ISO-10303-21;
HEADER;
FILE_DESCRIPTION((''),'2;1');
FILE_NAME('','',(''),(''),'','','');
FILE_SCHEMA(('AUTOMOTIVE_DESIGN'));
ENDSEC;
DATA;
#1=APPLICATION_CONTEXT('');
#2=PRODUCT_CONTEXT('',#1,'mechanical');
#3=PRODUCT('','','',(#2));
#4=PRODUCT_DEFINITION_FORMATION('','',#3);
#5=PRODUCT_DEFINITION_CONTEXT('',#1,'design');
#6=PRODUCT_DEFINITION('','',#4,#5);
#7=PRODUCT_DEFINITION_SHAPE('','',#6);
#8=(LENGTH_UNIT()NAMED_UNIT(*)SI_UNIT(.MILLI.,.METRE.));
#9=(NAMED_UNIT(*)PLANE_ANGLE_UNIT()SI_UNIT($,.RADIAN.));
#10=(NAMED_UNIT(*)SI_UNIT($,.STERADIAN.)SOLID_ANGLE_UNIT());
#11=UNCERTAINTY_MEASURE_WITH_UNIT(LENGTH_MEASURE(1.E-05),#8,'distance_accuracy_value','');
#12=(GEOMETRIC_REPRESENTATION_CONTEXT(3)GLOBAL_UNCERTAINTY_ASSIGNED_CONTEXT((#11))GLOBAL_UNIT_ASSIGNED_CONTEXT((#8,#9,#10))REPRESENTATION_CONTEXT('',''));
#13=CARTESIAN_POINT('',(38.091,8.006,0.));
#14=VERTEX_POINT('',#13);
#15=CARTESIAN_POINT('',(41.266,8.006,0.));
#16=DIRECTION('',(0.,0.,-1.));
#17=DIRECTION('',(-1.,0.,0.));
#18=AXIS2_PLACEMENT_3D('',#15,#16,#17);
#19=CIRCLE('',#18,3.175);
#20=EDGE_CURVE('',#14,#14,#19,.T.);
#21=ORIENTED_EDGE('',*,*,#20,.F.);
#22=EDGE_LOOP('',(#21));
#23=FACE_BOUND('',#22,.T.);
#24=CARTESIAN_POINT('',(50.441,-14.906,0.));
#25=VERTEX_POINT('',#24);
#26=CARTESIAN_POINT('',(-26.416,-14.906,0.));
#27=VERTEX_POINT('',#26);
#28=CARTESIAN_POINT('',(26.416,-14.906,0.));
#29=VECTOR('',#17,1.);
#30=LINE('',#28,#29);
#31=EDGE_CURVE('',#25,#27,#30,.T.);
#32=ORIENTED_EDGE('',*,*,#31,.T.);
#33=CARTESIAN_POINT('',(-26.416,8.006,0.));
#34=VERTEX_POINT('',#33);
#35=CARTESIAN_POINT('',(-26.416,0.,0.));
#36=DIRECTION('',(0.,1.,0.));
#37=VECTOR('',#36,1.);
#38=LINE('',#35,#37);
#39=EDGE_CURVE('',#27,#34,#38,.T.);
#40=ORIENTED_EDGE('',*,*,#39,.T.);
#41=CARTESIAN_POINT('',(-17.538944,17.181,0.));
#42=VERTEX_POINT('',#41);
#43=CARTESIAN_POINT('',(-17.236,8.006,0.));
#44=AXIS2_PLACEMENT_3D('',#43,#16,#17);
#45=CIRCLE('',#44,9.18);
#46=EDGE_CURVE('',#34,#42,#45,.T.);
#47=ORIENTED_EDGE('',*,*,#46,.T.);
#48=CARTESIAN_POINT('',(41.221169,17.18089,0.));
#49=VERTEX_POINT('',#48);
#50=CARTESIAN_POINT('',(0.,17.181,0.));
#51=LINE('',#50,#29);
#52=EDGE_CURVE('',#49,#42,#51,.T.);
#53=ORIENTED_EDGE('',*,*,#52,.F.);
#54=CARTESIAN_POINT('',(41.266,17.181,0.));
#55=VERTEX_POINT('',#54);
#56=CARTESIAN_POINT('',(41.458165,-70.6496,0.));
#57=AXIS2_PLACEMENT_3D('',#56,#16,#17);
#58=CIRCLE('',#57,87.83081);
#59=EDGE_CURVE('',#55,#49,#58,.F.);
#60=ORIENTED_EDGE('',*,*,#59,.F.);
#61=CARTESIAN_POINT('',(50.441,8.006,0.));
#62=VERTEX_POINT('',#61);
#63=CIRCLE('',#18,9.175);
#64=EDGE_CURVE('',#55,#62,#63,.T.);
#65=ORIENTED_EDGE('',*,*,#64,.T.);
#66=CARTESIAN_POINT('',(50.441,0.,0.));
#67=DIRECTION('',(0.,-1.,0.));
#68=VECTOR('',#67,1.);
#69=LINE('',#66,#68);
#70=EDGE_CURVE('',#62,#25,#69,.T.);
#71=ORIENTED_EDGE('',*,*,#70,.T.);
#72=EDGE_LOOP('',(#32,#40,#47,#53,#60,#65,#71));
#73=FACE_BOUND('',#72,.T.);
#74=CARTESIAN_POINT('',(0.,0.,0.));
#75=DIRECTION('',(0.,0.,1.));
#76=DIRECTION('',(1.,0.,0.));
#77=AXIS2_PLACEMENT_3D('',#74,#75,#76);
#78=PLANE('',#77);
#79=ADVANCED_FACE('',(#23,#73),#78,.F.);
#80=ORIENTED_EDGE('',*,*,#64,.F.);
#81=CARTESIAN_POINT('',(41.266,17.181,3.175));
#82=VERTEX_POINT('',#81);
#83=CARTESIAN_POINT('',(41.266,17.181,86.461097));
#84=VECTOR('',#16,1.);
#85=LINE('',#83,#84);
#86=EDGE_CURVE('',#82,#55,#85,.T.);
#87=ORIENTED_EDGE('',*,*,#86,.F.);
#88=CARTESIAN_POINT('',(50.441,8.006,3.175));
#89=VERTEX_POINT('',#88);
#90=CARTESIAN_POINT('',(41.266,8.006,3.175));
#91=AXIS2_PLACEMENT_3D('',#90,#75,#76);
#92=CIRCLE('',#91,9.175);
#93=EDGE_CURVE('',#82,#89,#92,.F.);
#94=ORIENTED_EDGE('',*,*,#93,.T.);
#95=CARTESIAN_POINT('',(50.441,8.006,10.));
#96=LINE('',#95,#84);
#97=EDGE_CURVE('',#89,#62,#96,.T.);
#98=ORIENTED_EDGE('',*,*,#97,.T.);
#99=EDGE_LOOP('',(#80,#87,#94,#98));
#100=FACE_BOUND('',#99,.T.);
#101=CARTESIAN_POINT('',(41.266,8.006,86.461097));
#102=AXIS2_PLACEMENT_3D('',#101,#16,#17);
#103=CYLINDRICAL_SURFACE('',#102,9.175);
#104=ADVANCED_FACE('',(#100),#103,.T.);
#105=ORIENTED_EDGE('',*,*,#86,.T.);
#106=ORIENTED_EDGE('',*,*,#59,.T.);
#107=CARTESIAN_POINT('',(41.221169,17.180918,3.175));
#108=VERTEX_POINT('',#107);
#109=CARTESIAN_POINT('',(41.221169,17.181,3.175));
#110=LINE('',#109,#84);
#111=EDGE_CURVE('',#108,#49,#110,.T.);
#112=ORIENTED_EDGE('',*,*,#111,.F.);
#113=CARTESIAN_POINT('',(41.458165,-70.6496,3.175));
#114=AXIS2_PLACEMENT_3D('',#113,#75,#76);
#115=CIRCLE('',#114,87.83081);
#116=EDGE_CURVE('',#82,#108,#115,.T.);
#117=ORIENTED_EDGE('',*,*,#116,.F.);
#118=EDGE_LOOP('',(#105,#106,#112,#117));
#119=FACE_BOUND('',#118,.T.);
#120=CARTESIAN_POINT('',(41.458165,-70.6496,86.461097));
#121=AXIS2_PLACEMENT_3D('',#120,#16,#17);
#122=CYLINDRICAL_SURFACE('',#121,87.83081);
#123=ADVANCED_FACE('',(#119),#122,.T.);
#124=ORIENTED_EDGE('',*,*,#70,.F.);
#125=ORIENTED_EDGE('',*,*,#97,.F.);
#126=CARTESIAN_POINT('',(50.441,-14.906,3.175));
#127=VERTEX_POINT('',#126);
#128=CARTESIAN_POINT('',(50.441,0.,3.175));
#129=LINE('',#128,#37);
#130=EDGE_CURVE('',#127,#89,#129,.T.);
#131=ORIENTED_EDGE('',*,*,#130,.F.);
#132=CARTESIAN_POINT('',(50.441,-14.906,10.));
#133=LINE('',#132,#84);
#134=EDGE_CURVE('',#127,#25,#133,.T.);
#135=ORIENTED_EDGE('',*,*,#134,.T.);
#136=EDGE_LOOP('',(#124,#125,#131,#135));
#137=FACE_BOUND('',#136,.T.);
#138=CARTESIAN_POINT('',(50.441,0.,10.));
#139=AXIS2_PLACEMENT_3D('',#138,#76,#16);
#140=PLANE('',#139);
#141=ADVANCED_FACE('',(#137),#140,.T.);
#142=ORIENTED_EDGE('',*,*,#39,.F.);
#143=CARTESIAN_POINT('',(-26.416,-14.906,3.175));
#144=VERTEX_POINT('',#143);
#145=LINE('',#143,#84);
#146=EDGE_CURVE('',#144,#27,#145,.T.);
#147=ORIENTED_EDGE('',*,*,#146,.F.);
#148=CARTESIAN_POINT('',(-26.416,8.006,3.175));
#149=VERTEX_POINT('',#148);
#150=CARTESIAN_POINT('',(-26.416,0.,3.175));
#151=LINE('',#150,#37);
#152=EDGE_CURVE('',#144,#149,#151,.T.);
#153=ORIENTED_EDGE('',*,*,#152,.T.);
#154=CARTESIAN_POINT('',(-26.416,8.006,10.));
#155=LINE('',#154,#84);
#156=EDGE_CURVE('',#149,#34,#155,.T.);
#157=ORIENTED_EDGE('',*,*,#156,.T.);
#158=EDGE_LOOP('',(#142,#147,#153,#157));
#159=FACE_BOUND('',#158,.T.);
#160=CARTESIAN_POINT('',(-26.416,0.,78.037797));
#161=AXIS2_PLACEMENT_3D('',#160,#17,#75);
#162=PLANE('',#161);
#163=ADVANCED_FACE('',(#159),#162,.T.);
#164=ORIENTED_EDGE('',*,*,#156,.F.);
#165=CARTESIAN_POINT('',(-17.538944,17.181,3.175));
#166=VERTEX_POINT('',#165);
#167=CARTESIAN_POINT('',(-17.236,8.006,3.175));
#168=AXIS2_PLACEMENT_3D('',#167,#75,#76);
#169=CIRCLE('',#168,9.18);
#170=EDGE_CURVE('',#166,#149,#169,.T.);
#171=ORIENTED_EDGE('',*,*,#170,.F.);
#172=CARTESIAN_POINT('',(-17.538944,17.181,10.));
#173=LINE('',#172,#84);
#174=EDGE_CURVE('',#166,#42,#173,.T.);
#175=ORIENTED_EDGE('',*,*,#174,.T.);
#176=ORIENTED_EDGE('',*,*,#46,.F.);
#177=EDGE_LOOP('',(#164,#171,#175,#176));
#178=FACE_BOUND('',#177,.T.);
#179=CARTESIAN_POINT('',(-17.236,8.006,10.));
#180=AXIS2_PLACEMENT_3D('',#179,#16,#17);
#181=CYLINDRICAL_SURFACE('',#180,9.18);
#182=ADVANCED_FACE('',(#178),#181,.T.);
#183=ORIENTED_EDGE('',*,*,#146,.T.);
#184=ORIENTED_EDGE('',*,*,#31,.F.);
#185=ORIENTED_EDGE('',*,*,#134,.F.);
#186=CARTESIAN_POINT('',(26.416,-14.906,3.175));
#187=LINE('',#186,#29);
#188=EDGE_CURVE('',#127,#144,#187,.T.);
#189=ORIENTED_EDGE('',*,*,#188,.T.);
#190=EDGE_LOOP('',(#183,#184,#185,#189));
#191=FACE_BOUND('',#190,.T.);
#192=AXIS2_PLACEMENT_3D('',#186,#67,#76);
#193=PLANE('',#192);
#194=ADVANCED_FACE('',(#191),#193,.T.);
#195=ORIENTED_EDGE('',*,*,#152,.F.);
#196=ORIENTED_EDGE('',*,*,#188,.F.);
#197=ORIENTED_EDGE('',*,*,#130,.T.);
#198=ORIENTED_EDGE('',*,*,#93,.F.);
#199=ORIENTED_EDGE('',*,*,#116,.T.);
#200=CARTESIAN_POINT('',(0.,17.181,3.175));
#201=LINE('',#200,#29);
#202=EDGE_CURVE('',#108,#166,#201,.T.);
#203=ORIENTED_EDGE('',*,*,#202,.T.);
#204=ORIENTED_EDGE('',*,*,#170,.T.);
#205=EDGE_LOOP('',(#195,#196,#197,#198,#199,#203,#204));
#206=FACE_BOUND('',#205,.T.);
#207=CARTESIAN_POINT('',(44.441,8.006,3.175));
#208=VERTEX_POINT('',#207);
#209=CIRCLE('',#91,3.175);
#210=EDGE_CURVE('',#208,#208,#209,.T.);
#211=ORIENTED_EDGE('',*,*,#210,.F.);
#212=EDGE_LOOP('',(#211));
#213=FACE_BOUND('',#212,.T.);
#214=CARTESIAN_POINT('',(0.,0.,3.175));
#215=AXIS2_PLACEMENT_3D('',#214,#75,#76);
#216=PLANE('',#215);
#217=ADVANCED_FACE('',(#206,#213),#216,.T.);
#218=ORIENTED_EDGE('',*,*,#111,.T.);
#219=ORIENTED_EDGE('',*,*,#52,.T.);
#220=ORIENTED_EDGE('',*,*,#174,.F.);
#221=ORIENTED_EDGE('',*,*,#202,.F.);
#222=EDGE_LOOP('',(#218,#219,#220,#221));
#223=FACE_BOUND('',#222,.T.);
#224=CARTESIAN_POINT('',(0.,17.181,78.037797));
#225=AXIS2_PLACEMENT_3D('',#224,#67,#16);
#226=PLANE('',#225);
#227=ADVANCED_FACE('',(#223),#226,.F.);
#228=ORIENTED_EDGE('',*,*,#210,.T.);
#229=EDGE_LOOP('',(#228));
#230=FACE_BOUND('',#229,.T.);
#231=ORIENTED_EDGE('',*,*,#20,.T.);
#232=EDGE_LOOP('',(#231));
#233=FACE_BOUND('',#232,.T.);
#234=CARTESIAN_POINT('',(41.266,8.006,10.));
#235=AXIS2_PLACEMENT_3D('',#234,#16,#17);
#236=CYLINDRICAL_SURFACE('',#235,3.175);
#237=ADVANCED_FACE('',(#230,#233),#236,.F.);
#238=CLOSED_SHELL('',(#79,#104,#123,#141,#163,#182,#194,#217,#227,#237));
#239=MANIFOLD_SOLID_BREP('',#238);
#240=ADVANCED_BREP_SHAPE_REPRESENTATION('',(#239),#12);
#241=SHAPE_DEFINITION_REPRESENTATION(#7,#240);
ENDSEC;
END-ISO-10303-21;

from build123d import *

# Parameters (mm, degrees)
SKETCH1_W           = 6.477
SKETCH1_H           = 19.812
SKETCH1_R           = 1.5
SKETCH1_W_2         = 52.832
SKETCH1_H_2         = 5
BOSS_EXTRUDE2_DEPTH = 3.175
SKETCH3_W           = 30
SKETCH3_H           = 29.812
BOSS_EXTRUDE3_DEPTH = 3.175
SKETCH4_R           = 3.175
CUT_EXTRUDE1_DEPTH  = 10
SKETCH5_W           = 56.703294506
SKETCH5_H           = 29.812
BOSS_EXTRUDE4_DEPTH = 3.175
BOSS_EXTRUDE6_DEPTH = 3.175
CUT_EXTRUDE3_DEPTH  = 10
SKETCH11_R          = 3.175
BOSS_EXTRUDE7_DEPTH = 3.175
CUT_EXTRUDE4_START  = -3.175
CUT_EXTRUDE4_DEPTH  = 3.175
SKETCH13_R          = 3.175
BOSS_EXTRUDE8_DEPTH = 3.175


# Read off the part's stored shape, not the designer's step: Cut-Extrude4
with BuildPart() as part:
    # Sketch1 → Boss-Extrude2 (new body)
    # profile 1 of 4: a face of its own
    with BuildSketch(Plane.XY):
        with Locations((-23.1775, 0)):
            Rectangle(SKETCH1_W, SKETCH1_H)
        with Locations((-23.622, -5.08)):
            Circle(SKETCH1_R, mode=Mode.SUBTRACT)
        with Locations((-23.622, 5.08)):
            Circle(SKETCH1_R, mode=Mode.SUBTRACT)
    # profile 2 of 4: a face of its own
    with BuildSketch(Plane.XY):
        with Locations((23.1775, 0)):
            Rectangle(SKETCH1_W, SKETCH1_H)
        with Locations((23.622, -5.08)):
            Circle(SKETCH1_R, mode=Mode.SUBTRACT)
        with Locations((23.622, 5.08)):
            Circle(SKETCH1_R, mode=Mode.SUBTRACT)
    # profile 3 of 4: a face of its own
    with BuildSketch(Plane.XY):
        with Locations((0, 12.406)):
            Rectangle(SKETCH1_W_2, SKETCH1_H_2)
    # profile 4 of 4: a face of its own
    with BuildSketch(Plane.XY):
        with Locations((0, -12.406)):
            Rectangle(SKETCH1_W_2, SKETCH1_H_2)
    extrude(amount=BOSS_EXTRUDE2_DEPTH)

    # Sketch3 → Boss-Extrude3 (add)
    with BuildSketch(Plane.XY.offset(3.175)):
        with Locations((41.416, 0)):
            Rectangle(SKETCH3_W, SKETCH3_H)
    extrude(amount=-BOSS_EXTRUDE3_DEPTH)

    # Sketch4 → Cut-Extrude1 (cut)
    with BuildSketch(Plane(origin=(0, 0, 0), x_dir=(-1, 0, 0), z_dir=(0, 0, -1))):
        with Locations((-41.266, 8.006)):
            Circle(SKETCH4_R)
    extrude(amount=-CUT_EXTRUDE1_DEPTH, mode=Mode.SUBTRACT)

    # Sketch5 → Boss-Extrude4 (add)
    with BuildSketch(Plane(origin=(0, 0, 0), x_dir=(-1, 0, 0), z_dir=(0, 0, -1))):
        with Locations((-1.935647253, 0)):
            Rectangle(SKETCH5_W, SKETCH5_H)
    extrude(amount=-BOSS_EXTRUDE4_DEPTH)

    # Sketch8 → Boss-Extrude6 (add)
    with BuildSketch(Plane(origin=(0, 0, 0), x_dir=(-1, 0, 0), z_dir=(0, 0, -1))):
        with BuildLine():
            ThreePointArc((-21.596379237, 14.906), (-31.366874619, 16.599566662), (-41.266, 17.181))
            ThreePointArc((-41.266, 17.181), (-44.496566901, 16.593436317), (-47.313365129, 14.906))
            Line((-47.313365129, 14.906), (-21.596379237, 14.906))
        make_face()
    extrude(amount=-BOSS_EXTRUDE6_DEPTH)

    # Sketch9 → Cut-Extrude3 (cut)
    with BuildSketch(Plane(origin=(0, 0, 0), x_dir=(-1, 0, 0), z_dir=(0, 0, -1))):
        with BuildLine():
            Line((-50.441, -14.906), (-50.441, 8.006))
            ThreePointArc((-50.441, 8.006), (-49.622590215, 11.79387869), (-47.313365129, 14.906))
            Line((-47.313365129, 14.906), (-56.416, 14.906))
            Line((-56.416, 14.906), (-56.416, -14.906))
            Line((-56.416, -14.906), (-50.441, -14.906))
        make_face()
        with BuildLine():
            ThreePointArc((-21.596379237, 14.906), (4.87312141, 3.967175073), (26.416, -14.906))
            Line((26.416, -14.906), (26.416, 14.906))
            Line((26.416, 14.906), (-21.596379237, 14.906))
        make_face()
    extrude(amount=-CUT_EXTRUDE3_DEPTH, mode=Mode.SUBTRACT)

    # Sketch11 → Boss-Extrude7 (add)
    with BuildSketch(Plane(origin=(0, 0, 0), x_dir=(-1, 0, 0), z_dir=(0, 0, -1))):
        with BuildLine():
            ThreePointArc((-41.266, 17.181), (-3.83303759, 8.714126043), (26.416, -14.906))
            Line((26.416, -14.906), (26.416, 17.181))
            Line((26.416, 17.181), (-41.266, 17.181))
        make_face()
        with Locations((17.236, 8.006)):
            Circle(SKETCH11_R, mode=Mode.SUBTRACT)
    extrude(amount=-BOSS_EXTRUDE7_DEPTH)

    # Cut-Extrude4 outline → Cut-Extrude4 (cut)
    with BuildSketch(Plane(origin=(0, 0, 0), x_dir=(-1, 0, 0), z_dir=(0, 0, -1)).offset(CUT_EXTRUDE4_START)):
        with BuildLine():
            ThreePointArc((17.538943889, 17.181), (23.833477734, 14.389234881), (26.416, 8.006))
            Line((26.416, 8.006), (26.416, 17.181))
            Line((26.416, 17.181), (17.538943889, 17.181))
        make_face()
    extrude(amount=CUT_EXTRUDE4_DEPTH, mode=Mode.SUBTRACT)

    # Sketch13 → Boss-Extrude8 (add)
    with BuildSketch(Plane(origin=(0, 0, 0), x_dir=(-1, 0, 0), z_dir=(0, 0, -1))):
        with Locations((17.236, 8.006)):
            Circle(SKETCH13_R)
    extrude(amount=-BOSS_EXTRUDE8_DEPTH)


solid = part.part
